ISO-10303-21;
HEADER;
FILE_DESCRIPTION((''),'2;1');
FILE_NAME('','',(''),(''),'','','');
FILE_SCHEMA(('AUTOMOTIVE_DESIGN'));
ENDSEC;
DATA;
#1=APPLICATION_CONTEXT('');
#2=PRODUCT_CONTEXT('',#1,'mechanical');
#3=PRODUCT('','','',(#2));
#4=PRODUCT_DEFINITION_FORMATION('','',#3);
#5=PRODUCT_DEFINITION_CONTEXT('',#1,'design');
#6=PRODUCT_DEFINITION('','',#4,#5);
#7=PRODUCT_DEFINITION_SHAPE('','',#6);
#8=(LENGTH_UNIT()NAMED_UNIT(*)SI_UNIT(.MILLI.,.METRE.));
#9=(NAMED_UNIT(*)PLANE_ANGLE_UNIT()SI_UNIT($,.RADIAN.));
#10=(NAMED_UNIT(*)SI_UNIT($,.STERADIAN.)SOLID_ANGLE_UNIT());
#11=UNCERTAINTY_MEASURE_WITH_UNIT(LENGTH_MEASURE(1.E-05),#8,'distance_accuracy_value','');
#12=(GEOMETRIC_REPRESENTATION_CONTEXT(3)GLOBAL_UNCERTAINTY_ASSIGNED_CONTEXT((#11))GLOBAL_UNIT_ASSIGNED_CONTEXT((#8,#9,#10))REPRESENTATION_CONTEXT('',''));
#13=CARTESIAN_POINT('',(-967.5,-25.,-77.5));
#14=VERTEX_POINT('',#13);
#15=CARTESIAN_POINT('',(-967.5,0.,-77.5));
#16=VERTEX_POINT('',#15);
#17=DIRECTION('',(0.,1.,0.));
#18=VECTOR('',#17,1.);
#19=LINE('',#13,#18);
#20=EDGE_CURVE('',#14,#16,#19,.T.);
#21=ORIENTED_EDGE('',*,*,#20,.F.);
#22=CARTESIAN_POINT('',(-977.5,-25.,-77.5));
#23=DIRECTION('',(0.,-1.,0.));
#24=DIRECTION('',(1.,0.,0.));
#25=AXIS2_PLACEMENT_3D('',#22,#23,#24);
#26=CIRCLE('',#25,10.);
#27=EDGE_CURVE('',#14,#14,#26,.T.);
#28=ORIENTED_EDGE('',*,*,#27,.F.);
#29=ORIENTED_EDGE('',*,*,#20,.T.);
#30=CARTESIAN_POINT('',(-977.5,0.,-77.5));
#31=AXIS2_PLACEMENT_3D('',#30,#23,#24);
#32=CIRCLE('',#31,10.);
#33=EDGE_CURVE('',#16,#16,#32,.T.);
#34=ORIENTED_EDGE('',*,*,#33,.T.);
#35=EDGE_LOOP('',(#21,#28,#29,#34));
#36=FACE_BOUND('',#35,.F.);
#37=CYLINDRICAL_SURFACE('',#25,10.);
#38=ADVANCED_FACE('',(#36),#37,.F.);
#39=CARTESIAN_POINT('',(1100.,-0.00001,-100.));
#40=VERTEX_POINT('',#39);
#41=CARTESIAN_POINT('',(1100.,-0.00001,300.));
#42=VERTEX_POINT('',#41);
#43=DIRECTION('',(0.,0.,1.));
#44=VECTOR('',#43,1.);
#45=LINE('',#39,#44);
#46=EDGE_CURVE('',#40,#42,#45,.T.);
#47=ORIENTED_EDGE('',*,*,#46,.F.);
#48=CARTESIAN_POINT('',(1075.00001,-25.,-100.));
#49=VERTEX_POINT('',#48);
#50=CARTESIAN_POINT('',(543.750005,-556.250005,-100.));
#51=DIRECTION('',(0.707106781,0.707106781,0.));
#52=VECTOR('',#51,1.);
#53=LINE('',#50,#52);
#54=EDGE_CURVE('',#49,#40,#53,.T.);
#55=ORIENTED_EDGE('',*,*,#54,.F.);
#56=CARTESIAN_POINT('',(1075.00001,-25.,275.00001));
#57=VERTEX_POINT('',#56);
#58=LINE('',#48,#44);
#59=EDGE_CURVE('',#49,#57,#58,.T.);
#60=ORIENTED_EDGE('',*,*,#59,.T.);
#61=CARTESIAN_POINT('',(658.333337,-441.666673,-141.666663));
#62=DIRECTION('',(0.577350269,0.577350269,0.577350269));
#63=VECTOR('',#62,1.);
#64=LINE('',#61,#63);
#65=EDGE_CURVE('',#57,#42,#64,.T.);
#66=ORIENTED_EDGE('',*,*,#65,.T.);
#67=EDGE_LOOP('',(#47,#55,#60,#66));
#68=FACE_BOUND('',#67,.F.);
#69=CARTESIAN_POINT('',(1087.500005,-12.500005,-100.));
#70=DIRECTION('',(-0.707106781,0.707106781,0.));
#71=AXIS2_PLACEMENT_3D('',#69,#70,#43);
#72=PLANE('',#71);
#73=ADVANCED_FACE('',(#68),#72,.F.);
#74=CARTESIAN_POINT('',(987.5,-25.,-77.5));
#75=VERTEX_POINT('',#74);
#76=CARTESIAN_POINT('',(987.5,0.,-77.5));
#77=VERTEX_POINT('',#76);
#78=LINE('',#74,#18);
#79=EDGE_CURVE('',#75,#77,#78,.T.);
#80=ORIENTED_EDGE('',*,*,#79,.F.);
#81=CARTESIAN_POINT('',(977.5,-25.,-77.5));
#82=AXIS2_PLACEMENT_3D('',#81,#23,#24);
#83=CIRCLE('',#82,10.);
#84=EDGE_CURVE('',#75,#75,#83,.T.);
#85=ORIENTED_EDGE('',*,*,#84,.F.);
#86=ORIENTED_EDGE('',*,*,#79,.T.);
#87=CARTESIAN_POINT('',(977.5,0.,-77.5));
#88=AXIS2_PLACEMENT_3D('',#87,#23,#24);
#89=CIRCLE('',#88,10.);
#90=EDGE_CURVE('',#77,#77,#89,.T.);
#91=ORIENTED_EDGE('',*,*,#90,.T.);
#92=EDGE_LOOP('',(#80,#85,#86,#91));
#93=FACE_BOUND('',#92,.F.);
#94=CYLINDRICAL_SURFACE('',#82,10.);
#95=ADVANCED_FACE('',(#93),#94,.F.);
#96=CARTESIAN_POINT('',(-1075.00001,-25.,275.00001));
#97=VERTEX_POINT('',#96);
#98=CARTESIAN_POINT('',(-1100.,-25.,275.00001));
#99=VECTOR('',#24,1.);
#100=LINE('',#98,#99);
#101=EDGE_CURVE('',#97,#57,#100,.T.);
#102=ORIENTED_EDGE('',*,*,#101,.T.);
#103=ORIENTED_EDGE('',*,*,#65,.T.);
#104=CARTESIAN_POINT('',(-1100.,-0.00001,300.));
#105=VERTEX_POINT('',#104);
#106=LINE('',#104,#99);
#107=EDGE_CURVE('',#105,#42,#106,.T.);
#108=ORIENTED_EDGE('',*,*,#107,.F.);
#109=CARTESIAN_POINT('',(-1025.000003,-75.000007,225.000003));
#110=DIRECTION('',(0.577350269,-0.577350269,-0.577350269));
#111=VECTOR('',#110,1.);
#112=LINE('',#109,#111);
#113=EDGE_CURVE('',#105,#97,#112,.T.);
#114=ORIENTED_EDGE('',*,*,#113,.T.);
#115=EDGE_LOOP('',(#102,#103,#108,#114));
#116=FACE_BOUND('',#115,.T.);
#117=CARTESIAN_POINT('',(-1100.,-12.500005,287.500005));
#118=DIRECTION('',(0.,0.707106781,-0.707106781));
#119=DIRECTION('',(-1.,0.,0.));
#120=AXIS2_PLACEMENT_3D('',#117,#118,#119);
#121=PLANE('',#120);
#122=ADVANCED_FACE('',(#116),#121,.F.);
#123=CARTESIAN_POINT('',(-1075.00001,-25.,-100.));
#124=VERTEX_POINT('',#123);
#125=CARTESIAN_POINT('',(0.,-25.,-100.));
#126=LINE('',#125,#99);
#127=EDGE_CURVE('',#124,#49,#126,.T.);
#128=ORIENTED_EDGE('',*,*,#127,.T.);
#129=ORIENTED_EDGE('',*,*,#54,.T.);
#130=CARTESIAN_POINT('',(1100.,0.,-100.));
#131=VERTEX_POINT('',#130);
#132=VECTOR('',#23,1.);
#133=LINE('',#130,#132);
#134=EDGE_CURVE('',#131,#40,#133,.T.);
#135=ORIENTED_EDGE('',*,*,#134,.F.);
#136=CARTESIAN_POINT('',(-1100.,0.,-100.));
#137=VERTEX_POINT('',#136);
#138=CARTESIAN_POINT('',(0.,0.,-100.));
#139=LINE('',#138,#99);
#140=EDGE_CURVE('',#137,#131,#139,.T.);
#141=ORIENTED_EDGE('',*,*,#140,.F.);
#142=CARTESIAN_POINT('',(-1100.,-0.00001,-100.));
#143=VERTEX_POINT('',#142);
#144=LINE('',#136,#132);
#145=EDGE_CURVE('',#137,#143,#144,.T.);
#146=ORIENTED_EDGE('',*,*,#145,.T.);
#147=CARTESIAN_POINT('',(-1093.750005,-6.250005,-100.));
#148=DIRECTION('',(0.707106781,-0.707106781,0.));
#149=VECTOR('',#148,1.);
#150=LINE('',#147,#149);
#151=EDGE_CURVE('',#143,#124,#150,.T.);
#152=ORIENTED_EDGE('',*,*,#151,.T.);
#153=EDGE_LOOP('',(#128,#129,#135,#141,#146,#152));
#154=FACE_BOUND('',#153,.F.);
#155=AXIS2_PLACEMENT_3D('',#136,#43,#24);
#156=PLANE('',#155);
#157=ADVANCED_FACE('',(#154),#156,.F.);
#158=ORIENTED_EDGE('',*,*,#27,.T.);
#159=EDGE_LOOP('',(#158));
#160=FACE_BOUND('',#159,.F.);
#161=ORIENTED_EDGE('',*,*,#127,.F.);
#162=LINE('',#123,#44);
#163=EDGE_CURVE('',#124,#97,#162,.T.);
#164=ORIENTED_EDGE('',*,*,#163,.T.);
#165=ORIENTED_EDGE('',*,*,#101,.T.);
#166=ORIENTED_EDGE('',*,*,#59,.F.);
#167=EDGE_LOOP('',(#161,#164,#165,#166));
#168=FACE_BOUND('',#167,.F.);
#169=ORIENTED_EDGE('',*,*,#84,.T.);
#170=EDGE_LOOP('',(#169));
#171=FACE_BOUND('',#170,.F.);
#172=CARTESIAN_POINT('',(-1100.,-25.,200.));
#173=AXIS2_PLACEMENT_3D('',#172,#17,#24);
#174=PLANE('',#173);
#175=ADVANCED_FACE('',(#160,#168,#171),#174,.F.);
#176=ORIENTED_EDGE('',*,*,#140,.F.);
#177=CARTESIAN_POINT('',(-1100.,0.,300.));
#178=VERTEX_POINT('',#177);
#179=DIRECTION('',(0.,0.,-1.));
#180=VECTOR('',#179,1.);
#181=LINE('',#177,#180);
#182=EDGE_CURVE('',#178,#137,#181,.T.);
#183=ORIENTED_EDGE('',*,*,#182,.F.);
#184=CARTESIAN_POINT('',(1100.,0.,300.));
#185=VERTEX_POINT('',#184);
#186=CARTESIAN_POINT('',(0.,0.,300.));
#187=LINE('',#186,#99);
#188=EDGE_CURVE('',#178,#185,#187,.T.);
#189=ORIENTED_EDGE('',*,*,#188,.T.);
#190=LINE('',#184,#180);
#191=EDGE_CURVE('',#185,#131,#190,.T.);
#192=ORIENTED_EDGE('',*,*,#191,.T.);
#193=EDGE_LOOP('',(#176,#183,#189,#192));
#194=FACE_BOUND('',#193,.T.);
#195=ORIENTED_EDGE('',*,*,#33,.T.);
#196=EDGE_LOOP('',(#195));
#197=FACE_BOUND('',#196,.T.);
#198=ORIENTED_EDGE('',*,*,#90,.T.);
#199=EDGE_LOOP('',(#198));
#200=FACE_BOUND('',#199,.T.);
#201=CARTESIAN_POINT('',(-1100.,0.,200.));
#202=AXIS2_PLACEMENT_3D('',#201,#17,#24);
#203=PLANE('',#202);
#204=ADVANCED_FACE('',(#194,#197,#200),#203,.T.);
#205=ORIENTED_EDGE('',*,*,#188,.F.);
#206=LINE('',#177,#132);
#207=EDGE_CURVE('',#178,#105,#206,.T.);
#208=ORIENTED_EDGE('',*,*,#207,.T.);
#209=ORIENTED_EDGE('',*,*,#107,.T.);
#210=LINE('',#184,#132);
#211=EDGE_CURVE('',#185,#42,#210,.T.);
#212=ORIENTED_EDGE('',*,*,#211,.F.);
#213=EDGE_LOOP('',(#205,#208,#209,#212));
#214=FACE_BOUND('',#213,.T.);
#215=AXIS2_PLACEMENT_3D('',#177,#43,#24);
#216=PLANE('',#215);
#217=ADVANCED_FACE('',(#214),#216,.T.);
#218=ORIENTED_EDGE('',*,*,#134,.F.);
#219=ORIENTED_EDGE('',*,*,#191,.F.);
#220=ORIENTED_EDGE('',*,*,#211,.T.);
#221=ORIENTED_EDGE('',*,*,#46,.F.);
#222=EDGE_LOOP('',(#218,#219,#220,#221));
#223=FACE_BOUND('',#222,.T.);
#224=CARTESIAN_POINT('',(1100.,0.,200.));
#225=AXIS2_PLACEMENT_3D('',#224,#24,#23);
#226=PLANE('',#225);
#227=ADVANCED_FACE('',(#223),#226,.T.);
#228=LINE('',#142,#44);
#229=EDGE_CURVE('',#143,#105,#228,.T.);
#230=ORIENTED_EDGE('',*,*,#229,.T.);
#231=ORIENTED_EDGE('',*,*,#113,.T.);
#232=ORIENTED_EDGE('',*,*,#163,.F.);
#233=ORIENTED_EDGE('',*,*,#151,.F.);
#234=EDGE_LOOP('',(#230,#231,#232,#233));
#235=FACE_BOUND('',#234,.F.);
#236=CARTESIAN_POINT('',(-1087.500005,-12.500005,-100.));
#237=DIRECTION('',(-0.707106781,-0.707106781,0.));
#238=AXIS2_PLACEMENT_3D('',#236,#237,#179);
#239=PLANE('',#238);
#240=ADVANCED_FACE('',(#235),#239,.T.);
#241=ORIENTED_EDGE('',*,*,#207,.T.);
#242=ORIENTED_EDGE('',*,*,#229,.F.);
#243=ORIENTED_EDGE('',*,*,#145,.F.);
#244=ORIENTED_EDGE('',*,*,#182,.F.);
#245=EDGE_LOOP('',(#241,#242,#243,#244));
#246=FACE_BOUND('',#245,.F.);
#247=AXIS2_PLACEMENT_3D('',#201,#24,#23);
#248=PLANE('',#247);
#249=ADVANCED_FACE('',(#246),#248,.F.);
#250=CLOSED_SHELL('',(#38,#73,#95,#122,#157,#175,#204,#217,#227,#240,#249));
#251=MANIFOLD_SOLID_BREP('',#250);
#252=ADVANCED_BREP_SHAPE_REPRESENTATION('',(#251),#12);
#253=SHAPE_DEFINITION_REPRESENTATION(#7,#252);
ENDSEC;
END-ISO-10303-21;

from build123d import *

# Parameters (mm, degrees)
F0_W     = 2200
F0_H     = 400
F1_DEPTH = 25
F2_R     = 10
F3_DEPTH = 25
F4_R     = 10
F5_DEPTH = 25
F6_DEPTH = 100
F7_DEPTH = 100
F8_SIZE  = 24.99999


# Not quite as in the source:
# - a fillet or chamfer is up to 0.001 mm smaller than in the source, because OpenCascade refuses the exact size


with BuildPart() as f1:
    # F0 (on Front) → F1 (new body)
    with BuildSketch(Plane.XZ):
        Rectangle(F0_W, F0_H)
    extrude(amount=F1_DEPTH)

    # F2 (on face) → F3 (cut)
    with BuildSketch(Plane.XZ.offset(25)):
        with Locations((977.5, -77.5)):
            Circle(F2_R)
    extrude(amount=-F3_DEPTH, mode=Mode.SUBTRACT)

    # F4 (on face) → F5 (cut)
    with BuildSketch(Plane.XZ.offset(25)):
        with Locations((-977.5, -77.5)):
            Circle(F4_R)
    extrude(amount=-F5_DEPTH, mode=Mode.SUBTRACT)

    # F6 (add): a face of the model
    f6_faces = [f1.faces().sort_by_distance(p)[0] for p in [
        (0, -12.5, 200),
    ]]
    extrude(f6_faces, amount=F6_DEPTH)

    # F7 (cut): a face of the model
    f7_faces = [f1.faces().sort_by_distance(p)[0] for p in [
        (0, -12.5, -200),
    ]]
    extrude(f7_faces, amount=-F7_DEPTH, mode=Mode.SUBTRACT)

    # F8 (size 25 in the source; OpenCascade refuses exactly that, so slightly less here)
    f8_edges = [f1.edges().sort_by_distance(p)[0] for p in [
        (-1100, -25, 100),
        (0, -25, 300),
        (1100, -25, 100),
    ]]
    chamfer(f8_edges, length=F8_SIZE)


solid = f1.part
